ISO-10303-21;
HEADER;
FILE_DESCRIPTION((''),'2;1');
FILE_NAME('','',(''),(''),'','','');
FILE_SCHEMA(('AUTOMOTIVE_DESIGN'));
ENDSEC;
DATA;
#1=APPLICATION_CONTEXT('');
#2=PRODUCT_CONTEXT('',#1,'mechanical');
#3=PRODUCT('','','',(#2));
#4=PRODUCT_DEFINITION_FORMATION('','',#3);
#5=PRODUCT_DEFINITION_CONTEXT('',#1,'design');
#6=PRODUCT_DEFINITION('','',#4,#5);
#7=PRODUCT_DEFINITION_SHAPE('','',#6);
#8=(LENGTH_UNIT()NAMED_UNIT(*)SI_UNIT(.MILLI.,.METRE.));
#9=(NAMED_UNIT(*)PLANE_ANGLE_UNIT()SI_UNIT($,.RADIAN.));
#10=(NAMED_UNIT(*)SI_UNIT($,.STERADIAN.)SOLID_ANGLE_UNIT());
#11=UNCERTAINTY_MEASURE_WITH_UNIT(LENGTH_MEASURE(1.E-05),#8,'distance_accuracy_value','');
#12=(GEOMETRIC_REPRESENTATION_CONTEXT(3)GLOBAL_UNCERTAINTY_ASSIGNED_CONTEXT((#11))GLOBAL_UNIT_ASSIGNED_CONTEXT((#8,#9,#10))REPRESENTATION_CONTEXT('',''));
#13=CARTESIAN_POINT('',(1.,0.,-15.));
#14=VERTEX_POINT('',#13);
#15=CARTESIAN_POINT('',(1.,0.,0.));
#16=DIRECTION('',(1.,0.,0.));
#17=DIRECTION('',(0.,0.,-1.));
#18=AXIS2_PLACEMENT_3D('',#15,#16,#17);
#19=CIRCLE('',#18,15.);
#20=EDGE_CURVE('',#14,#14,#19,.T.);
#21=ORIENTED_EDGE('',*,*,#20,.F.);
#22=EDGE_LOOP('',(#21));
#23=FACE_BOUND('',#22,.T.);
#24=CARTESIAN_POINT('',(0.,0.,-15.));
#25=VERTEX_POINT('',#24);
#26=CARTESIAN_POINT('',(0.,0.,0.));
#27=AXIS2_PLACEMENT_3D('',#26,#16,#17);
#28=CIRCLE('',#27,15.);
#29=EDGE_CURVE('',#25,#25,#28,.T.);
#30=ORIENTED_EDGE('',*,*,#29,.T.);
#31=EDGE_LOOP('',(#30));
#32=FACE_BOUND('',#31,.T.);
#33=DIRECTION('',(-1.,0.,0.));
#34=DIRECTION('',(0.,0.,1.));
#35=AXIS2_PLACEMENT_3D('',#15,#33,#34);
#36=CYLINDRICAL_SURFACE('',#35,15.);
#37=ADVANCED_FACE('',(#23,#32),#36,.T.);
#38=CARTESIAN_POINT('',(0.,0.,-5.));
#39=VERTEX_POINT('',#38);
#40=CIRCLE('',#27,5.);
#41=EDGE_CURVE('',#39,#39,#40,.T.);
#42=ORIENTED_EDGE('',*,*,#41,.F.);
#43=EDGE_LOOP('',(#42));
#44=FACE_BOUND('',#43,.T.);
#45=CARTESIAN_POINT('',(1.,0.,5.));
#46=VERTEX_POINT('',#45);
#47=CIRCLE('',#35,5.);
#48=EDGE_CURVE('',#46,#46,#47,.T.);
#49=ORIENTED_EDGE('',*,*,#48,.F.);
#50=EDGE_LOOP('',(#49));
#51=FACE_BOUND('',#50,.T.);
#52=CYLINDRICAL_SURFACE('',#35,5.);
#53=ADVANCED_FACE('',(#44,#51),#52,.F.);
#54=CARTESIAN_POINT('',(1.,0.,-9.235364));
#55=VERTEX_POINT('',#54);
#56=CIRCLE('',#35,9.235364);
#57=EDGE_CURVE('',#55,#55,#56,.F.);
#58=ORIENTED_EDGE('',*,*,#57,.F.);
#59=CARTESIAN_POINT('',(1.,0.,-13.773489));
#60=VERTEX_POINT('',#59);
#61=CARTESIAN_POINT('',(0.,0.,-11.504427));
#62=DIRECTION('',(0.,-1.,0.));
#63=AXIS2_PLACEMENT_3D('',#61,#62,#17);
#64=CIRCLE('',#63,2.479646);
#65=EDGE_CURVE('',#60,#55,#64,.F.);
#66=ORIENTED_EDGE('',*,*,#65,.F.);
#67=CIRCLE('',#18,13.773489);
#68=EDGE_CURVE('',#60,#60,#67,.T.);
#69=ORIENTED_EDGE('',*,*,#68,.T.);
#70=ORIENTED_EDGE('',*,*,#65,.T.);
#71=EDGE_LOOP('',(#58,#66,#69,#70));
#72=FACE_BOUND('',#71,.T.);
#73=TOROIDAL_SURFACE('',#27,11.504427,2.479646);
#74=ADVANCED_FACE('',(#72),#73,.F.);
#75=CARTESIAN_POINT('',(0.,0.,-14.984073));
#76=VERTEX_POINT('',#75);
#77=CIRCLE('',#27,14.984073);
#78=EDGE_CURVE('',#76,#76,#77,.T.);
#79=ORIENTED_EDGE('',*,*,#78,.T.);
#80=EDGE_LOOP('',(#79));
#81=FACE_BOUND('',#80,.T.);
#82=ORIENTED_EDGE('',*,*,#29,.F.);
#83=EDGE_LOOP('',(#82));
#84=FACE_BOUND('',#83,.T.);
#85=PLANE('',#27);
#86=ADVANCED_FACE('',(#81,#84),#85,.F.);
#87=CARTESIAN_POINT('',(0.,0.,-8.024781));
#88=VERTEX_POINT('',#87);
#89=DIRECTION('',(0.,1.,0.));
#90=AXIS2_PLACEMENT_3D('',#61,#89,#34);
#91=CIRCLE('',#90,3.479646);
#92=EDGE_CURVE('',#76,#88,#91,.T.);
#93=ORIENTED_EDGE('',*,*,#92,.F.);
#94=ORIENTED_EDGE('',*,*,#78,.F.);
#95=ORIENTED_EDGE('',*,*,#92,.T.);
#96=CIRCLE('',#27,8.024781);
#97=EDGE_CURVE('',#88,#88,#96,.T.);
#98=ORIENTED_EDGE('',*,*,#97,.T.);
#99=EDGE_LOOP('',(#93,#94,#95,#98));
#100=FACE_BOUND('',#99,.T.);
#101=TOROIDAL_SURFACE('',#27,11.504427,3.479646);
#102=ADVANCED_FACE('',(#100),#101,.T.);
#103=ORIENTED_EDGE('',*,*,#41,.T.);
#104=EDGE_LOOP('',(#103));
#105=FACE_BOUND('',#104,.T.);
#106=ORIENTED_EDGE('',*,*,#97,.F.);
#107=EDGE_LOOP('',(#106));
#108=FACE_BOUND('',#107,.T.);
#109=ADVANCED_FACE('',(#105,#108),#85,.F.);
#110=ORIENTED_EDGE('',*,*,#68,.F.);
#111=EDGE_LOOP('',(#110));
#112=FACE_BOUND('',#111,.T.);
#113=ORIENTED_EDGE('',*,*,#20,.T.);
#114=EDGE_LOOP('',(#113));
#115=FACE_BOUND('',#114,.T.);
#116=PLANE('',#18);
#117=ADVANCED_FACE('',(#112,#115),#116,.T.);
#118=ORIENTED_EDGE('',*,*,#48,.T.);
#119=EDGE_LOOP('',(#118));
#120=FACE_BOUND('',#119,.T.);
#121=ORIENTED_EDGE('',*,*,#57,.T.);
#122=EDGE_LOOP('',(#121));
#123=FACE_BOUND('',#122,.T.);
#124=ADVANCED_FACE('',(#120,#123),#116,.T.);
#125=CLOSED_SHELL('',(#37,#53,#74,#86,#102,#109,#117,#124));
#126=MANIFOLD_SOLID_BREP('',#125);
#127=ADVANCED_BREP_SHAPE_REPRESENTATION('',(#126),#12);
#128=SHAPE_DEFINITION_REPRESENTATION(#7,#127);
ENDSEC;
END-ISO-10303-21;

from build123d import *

# Parameters (mm, degrees)
SKETCH_1_R               = 15
EXTRUDE_1_DEPTH          = 1
CUT_EXTRUDE_1_DEPTH      = 22.496695971
CUT_EXTRUDE_1_DEPTH_BACK = 22.496695971
SKETCH_3_R               = 5


# Read off the part's stored shape, not the designer's step: 抽壳1
with BuildPart() as part:
    # 草图1 → 凸台-拉伸1 (new body)
    with BuildSketch(Plane(origin=(0, 0, 0), x_dir=(0, 0, -1), z_dir=(1, 0, 0))):
        Circle(SKETCH_1_R)
    extrude(amount=EXTRUDE_1_DEPTH)

    # 扫描2: sweep along a curve in space
    with BuildLine() as sweep_2_path:
        ThreePointArc((0, 0, -15), (0, 10.606601718, -10.606601718), (0, 15, 0))
        ThreePointArc((0, 15, 0), (0, 10.606601718, 10.606601718), (0, 0, 15))
        ThreePointArc((0, 0, 15), (0, -10.606601718, 10.606601718), (0, -15, 0))
        ThreePointArc((0, -15, 0), (0, -10.606601718, -10.606601718), (0, 0, -15))
    # 草图2 → 扫描2 (sweep)
    with BuildSketch(Plane(origin=(0, 0, 0), x_dir=(1, 0, 0), z_dir=(0, 1, 0))):
        with BuildLine():
            Line((0, 14.984072939), (0, 8.024780741))
            ThreePointArc((0, 8.024780741), (-3.479646099, 11.50442684), (0, 14.984072939))
        make_face()
    sweep(path=sweep_2_path.line)

    # 抽壳1 outline → 抽壳1 (revolve, cut)
    with BuildSketch(Plane.YX):
        with BuildLine():
            ThreePointArc((9.235364307, 1), (11.50442684, -2.479646099), (13.773489373, 1))
            Line((13.773489373, 1), (9.235364307, 1))
        make_face()
    revolve(axis=Axis((0, 0, 0), (1, 0, 0)), mode=Mode.SUBTRACT)

    # 草图3 → 切除-拉伸1 (cut, two sides: drawn at the far end of the back side and taken through both)
    with BuildSketch(Plane.ZY.offset(-CUT_EXTRUDE_1_DEPTH_BACK)):
        Circle(SKETCH_3_R)
    extrude(amount=CUT_EXTRUDE_1_DEPTH + CUT_EXTRUDE_1_DEPTH_BACK, mode=Mode.SUBTRACT)


solid = part.part
